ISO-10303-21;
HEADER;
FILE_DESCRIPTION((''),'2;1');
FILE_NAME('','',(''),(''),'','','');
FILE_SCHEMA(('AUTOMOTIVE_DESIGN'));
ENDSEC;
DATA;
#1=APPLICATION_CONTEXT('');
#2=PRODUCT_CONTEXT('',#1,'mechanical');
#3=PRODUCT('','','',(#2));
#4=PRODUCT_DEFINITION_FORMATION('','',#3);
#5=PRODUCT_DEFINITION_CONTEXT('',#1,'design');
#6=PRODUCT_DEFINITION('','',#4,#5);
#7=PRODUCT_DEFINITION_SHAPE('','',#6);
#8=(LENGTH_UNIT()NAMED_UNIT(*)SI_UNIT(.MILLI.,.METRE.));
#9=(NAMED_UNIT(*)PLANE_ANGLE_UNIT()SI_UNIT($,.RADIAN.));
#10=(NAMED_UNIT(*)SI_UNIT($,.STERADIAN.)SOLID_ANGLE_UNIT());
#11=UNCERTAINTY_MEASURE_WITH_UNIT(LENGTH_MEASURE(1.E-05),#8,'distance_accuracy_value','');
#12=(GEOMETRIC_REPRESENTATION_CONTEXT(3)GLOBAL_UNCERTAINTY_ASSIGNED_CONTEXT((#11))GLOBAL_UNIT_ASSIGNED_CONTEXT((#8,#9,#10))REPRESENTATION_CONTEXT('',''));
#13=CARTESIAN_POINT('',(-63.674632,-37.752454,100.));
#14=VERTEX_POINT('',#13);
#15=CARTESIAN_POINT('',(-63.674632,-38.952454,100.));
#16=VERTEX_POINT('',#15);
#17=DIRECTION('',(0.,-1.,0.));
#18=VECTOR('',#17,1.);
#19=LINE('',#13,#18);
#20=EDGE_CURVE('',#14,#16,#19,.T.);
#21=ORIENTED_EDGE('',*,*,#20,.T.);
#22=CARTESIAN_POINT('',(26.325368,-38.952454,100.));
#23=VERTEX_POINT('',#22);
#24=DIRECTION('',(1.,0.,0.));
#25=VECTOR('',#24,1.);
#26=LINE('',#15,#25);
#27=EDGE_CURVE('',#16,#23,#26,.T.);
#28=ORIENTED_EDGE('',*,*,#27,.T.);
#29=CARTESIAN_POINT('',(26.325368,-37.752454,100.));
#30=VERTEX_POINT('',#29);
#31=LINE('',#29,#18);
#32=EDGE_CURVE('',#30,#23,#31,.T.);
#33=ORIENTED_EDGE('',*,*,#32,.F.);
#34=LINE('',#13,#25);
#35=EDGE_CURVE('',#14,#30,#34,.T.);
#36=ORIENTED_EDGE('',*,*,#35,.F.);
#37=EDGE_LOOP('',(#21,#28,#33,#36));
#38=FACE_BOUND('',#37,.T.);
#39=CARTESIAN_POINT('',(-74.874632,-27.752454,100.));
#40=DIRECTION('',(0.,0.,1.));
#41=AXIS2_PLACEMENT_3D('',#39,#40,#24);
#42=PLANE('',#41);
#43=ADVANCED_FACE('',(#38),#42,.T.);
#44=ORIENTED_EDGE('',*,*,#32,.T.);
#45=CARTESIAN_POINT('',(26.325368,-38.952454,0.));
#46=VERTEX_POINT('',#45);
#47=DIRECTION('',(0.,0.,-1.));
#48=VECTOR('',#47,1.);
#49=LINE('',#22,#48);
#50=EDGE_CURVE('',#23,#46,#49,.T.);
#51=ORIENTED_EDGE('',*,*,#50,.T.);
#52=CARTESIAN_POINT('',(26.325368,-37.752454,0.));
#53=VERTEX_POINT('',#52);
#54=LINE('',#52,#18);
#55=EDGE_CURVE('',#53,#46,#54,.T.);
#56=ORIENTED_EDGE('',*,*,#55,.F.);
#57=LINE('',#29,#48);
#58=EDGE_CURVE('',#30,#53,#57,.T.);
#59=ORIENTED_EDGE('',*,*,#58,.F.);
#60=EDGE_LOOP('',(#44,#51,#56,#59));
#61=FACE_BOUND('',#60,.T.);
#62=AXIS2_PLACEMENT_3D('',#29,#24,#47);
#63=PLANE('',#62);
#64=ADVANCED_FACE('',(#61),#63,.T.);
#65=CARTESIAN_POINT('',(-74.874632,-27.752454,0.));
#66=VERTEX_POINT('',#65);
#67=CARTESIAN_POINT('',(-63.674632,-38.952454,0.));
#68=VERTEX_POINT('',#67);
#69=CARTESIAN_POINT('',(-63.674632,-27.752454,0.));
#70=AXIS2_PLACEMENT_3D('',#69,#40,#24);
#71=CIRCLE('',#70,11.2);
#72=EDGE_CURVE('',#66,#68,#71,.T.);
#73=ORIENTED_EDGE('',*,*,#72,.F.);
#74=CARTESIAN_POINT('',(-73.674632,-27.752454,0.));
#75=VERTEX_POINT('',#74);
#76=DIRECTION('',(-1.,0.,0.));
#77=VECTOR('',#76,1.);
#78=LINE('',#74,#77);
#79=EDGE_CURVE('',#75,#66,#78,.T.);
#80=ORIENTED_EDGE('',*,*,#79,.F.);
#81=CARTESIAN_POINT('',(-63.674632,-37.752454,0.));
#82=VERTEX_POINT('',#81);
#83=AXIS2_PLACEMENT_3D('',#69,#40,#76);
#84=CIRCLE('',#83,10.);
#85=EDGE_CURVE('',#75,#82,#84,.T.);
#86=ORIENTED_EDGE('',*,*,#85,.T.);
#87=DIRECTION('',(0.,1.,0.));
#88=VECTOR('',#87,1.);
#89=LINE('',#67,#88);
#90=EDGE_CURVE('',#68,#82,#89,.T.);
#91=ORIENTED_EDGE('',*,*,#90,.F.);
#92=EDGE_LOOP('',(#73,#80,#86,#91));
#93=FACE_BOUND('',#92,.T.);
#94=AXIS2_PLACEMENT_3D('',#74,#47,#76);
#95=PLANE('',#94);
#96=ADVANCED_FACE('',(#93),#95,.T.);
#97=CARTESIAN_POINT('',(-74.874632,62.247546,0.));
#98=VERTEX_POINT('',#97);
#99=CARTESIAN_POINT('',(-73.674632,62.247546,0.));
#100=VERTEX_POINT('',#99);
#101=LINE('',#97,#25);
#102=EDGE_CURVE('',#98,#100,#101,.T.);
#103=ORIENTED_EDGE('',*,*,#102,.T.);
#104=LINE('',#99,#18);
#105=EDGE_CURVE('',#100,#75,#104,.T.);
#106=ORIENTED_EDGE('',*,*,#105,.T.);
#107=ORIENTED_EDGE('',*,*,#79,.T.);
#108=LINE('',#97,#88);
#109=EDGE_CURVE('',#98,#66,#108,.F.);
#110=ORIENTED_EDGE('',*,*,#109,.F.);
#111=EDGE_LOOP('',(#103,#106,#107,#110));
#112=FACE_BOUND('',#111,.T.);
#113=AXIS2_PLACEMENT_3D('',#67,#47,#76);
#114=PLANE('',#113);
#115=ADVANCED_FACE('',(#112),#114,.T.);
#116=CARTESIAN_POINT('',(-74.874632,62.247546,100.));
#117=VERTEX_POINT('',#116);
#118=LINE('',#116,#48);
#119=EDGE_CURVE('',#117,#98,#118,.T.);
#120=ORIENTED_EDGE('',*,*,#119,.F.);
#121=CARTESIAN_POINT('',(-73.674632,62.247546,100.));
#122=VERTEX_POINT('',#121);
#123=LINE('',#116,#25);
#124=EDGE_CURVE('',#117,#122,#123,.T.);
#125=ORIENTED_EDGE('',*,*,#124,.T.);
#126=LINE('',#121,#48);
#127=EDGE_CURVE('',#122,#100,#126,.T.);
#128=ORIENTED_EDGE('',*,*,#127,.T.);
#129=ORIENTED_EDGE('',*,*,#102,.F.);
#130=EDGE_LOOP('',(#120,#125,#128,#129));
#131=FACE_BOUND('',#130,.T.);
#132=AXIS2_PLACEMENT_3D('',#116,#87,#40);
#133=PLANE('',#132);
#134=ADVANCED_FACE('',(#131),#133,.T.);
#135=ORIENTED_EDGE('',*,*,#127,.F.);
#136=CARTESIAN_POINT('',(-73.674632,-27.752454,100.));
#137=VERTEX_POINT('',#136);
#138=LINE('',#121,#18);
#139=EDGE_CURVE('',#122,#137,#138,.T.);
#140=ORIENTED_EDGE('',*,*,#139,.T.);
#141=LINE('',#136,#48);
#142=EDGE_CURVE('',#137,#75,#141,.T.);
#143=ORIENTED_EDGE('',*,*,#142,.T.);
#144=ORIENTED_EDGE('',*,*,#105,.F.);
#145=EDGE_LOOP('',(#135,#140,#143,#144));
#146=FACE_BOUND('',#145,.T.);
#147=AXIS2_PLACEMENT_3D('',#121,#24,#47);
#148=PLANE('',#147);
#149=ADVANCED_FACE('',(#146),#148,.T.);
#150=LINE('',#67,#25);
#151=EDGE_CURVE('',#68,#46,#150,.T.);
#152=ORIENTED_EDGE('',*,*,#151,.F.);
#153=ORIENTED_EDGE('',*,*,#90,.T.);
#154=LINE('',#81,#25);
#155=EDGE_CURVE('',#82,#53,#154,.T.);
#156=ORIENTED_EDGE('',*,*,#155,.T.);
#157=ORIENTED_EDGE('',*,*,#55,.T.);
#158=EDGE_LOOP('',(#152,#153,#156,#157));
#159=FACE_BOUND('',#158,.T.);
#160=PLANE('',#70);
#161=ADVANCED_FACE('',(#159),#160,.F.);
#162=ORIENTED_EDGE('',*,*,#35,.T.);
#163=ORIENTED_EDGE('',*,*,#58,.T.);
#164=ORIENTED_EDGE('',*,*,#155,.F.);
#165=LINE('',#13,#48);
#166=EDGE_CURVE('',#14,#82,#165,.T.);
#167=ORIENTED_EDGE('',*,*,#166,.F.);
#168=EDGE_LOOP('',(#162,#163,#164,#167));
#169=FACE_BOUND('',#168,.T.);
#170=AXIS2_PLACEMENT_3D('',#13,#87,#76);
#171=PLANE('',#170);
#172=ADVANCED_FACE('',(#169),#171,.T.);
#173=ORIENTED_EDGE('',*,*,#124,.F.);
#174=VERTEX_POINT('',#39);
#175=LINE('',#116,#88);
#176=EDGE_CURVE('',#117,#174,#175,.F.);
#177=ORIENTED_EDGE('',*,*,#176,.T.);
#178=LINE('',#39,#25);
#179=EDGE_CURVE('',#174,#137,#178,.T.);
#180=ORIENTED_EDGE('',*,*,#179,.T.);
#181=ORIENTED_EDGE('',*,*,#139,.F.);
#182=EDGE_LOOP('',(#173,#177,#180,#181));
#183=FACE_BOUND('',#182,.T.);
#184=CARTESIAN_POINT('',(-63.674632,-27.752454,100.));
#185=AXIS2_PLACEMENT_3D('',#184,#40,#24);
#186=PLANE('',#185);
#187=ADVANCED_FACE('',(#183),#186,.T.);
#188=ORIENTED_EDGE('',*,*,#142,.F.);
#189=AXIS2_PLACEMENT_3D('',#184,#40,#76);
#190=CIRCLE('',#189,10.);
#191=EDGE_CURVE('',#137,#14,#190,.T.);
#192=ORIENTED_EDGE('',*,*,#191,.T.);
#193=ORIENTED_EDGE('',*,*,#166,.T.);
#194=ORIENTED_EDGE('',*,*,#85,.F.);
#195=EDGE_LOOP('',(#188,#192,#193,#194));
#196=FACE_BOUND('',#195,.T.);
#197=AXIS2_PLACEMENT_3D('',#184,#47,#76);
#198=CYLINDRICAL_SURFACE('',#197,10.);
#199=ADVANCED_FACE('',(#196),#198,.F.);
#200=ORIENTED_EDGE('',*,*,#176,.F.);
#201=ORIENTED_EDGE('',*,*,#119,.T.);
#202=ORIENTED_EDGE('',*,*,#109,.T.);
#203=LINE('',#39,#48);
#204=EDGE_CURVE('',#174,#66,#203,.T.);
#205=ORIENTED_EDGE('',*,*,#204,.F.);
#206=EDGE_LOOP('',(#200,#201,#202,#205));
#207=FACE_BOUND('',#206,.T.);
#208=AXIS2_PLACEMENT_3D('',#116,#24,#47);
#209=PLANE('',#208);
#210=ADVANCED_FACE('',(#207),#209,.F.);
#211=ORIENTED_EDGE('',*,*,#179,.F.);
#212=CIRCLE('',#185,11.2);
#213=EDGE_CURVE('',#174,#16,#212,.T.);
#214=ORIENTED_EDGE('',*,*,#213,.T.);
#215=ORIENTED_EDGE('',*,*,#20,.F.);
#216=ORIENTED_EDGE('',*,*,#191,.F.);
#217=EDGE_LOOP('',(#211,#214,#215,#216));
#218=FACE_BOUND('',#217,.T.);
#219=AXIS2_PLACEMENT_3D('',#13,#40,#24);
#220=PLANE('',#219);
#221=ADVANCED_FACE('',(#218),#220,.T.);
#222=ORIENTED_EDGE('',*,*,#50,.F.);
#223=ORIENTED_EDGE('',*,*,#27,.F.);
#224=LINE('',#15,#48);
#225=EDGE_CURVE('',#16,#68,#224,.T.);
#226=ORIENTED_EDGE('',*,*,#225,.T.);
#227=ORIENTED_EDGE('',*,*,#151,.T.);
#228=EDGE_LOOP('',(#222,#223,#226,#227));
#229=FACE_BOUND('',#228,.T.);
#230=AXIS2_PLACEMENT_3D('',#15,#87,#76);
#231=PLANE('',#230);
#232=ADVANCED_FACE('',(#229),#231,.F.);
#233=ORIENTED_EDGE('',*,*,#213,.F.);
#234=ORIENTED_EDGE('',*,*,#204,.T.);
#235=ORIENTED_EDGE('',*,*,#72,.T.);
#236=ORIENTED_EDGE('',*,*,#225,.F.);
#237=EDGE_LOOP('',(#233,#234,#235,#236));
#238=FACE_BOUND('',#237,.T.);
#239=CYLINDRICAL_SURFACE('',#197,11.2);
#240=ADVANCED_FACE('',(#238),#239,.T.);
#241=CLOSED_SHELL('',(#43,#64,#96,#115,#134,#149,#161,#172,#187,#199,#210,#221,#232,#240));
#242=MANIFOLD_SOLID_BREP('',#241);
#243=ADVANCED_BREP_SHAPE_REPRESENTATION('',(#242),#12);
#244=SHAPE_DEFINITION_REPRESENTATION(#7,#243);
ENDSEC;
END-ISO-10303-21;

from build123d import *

# Parameters (mm, degrees)
SM_BASE_FLANGE_1_DEPTH = 100


# Sheet-metal steps are written as plain solids
with BuildPart() as part:
    # Sketch 1 → 基体-法兰1 (new body)
    with BuildSketch(Plane.XY):
        with BuildLine():
            Line((-73.674631656, 62.24754593), (-73.674631656, -27.75245407))
            ThreePointArc((-73.674631656, -27.75245407), (-70.745699468, -34.823521882), (-63.674631656, -37.75245407))
            Line((-63.674631656, -37.75245407), (26.325368344, -37.75245407))
            Line((26.325368344, -37.75245407), (26.325368344, -38.95245407))
            Line((26.325368344, -38.95245407), (-63.674631656, -38.95245407))
            ThreePointArc((-63.674631656, -38.95245407), (-71.594227605, -35.67205002), (-74.874631656, -27.75245407))
            Line((-74.874631656, -27.75245407), (-74.874631656, 62.24754593))
            Line((-74.874631656, 62.24754593), (-73.674631656, 62.24754593))
        make_face()
    extrude(amount=SM_BASE_FLANGE_1_DEPTH)


solid = part.part
